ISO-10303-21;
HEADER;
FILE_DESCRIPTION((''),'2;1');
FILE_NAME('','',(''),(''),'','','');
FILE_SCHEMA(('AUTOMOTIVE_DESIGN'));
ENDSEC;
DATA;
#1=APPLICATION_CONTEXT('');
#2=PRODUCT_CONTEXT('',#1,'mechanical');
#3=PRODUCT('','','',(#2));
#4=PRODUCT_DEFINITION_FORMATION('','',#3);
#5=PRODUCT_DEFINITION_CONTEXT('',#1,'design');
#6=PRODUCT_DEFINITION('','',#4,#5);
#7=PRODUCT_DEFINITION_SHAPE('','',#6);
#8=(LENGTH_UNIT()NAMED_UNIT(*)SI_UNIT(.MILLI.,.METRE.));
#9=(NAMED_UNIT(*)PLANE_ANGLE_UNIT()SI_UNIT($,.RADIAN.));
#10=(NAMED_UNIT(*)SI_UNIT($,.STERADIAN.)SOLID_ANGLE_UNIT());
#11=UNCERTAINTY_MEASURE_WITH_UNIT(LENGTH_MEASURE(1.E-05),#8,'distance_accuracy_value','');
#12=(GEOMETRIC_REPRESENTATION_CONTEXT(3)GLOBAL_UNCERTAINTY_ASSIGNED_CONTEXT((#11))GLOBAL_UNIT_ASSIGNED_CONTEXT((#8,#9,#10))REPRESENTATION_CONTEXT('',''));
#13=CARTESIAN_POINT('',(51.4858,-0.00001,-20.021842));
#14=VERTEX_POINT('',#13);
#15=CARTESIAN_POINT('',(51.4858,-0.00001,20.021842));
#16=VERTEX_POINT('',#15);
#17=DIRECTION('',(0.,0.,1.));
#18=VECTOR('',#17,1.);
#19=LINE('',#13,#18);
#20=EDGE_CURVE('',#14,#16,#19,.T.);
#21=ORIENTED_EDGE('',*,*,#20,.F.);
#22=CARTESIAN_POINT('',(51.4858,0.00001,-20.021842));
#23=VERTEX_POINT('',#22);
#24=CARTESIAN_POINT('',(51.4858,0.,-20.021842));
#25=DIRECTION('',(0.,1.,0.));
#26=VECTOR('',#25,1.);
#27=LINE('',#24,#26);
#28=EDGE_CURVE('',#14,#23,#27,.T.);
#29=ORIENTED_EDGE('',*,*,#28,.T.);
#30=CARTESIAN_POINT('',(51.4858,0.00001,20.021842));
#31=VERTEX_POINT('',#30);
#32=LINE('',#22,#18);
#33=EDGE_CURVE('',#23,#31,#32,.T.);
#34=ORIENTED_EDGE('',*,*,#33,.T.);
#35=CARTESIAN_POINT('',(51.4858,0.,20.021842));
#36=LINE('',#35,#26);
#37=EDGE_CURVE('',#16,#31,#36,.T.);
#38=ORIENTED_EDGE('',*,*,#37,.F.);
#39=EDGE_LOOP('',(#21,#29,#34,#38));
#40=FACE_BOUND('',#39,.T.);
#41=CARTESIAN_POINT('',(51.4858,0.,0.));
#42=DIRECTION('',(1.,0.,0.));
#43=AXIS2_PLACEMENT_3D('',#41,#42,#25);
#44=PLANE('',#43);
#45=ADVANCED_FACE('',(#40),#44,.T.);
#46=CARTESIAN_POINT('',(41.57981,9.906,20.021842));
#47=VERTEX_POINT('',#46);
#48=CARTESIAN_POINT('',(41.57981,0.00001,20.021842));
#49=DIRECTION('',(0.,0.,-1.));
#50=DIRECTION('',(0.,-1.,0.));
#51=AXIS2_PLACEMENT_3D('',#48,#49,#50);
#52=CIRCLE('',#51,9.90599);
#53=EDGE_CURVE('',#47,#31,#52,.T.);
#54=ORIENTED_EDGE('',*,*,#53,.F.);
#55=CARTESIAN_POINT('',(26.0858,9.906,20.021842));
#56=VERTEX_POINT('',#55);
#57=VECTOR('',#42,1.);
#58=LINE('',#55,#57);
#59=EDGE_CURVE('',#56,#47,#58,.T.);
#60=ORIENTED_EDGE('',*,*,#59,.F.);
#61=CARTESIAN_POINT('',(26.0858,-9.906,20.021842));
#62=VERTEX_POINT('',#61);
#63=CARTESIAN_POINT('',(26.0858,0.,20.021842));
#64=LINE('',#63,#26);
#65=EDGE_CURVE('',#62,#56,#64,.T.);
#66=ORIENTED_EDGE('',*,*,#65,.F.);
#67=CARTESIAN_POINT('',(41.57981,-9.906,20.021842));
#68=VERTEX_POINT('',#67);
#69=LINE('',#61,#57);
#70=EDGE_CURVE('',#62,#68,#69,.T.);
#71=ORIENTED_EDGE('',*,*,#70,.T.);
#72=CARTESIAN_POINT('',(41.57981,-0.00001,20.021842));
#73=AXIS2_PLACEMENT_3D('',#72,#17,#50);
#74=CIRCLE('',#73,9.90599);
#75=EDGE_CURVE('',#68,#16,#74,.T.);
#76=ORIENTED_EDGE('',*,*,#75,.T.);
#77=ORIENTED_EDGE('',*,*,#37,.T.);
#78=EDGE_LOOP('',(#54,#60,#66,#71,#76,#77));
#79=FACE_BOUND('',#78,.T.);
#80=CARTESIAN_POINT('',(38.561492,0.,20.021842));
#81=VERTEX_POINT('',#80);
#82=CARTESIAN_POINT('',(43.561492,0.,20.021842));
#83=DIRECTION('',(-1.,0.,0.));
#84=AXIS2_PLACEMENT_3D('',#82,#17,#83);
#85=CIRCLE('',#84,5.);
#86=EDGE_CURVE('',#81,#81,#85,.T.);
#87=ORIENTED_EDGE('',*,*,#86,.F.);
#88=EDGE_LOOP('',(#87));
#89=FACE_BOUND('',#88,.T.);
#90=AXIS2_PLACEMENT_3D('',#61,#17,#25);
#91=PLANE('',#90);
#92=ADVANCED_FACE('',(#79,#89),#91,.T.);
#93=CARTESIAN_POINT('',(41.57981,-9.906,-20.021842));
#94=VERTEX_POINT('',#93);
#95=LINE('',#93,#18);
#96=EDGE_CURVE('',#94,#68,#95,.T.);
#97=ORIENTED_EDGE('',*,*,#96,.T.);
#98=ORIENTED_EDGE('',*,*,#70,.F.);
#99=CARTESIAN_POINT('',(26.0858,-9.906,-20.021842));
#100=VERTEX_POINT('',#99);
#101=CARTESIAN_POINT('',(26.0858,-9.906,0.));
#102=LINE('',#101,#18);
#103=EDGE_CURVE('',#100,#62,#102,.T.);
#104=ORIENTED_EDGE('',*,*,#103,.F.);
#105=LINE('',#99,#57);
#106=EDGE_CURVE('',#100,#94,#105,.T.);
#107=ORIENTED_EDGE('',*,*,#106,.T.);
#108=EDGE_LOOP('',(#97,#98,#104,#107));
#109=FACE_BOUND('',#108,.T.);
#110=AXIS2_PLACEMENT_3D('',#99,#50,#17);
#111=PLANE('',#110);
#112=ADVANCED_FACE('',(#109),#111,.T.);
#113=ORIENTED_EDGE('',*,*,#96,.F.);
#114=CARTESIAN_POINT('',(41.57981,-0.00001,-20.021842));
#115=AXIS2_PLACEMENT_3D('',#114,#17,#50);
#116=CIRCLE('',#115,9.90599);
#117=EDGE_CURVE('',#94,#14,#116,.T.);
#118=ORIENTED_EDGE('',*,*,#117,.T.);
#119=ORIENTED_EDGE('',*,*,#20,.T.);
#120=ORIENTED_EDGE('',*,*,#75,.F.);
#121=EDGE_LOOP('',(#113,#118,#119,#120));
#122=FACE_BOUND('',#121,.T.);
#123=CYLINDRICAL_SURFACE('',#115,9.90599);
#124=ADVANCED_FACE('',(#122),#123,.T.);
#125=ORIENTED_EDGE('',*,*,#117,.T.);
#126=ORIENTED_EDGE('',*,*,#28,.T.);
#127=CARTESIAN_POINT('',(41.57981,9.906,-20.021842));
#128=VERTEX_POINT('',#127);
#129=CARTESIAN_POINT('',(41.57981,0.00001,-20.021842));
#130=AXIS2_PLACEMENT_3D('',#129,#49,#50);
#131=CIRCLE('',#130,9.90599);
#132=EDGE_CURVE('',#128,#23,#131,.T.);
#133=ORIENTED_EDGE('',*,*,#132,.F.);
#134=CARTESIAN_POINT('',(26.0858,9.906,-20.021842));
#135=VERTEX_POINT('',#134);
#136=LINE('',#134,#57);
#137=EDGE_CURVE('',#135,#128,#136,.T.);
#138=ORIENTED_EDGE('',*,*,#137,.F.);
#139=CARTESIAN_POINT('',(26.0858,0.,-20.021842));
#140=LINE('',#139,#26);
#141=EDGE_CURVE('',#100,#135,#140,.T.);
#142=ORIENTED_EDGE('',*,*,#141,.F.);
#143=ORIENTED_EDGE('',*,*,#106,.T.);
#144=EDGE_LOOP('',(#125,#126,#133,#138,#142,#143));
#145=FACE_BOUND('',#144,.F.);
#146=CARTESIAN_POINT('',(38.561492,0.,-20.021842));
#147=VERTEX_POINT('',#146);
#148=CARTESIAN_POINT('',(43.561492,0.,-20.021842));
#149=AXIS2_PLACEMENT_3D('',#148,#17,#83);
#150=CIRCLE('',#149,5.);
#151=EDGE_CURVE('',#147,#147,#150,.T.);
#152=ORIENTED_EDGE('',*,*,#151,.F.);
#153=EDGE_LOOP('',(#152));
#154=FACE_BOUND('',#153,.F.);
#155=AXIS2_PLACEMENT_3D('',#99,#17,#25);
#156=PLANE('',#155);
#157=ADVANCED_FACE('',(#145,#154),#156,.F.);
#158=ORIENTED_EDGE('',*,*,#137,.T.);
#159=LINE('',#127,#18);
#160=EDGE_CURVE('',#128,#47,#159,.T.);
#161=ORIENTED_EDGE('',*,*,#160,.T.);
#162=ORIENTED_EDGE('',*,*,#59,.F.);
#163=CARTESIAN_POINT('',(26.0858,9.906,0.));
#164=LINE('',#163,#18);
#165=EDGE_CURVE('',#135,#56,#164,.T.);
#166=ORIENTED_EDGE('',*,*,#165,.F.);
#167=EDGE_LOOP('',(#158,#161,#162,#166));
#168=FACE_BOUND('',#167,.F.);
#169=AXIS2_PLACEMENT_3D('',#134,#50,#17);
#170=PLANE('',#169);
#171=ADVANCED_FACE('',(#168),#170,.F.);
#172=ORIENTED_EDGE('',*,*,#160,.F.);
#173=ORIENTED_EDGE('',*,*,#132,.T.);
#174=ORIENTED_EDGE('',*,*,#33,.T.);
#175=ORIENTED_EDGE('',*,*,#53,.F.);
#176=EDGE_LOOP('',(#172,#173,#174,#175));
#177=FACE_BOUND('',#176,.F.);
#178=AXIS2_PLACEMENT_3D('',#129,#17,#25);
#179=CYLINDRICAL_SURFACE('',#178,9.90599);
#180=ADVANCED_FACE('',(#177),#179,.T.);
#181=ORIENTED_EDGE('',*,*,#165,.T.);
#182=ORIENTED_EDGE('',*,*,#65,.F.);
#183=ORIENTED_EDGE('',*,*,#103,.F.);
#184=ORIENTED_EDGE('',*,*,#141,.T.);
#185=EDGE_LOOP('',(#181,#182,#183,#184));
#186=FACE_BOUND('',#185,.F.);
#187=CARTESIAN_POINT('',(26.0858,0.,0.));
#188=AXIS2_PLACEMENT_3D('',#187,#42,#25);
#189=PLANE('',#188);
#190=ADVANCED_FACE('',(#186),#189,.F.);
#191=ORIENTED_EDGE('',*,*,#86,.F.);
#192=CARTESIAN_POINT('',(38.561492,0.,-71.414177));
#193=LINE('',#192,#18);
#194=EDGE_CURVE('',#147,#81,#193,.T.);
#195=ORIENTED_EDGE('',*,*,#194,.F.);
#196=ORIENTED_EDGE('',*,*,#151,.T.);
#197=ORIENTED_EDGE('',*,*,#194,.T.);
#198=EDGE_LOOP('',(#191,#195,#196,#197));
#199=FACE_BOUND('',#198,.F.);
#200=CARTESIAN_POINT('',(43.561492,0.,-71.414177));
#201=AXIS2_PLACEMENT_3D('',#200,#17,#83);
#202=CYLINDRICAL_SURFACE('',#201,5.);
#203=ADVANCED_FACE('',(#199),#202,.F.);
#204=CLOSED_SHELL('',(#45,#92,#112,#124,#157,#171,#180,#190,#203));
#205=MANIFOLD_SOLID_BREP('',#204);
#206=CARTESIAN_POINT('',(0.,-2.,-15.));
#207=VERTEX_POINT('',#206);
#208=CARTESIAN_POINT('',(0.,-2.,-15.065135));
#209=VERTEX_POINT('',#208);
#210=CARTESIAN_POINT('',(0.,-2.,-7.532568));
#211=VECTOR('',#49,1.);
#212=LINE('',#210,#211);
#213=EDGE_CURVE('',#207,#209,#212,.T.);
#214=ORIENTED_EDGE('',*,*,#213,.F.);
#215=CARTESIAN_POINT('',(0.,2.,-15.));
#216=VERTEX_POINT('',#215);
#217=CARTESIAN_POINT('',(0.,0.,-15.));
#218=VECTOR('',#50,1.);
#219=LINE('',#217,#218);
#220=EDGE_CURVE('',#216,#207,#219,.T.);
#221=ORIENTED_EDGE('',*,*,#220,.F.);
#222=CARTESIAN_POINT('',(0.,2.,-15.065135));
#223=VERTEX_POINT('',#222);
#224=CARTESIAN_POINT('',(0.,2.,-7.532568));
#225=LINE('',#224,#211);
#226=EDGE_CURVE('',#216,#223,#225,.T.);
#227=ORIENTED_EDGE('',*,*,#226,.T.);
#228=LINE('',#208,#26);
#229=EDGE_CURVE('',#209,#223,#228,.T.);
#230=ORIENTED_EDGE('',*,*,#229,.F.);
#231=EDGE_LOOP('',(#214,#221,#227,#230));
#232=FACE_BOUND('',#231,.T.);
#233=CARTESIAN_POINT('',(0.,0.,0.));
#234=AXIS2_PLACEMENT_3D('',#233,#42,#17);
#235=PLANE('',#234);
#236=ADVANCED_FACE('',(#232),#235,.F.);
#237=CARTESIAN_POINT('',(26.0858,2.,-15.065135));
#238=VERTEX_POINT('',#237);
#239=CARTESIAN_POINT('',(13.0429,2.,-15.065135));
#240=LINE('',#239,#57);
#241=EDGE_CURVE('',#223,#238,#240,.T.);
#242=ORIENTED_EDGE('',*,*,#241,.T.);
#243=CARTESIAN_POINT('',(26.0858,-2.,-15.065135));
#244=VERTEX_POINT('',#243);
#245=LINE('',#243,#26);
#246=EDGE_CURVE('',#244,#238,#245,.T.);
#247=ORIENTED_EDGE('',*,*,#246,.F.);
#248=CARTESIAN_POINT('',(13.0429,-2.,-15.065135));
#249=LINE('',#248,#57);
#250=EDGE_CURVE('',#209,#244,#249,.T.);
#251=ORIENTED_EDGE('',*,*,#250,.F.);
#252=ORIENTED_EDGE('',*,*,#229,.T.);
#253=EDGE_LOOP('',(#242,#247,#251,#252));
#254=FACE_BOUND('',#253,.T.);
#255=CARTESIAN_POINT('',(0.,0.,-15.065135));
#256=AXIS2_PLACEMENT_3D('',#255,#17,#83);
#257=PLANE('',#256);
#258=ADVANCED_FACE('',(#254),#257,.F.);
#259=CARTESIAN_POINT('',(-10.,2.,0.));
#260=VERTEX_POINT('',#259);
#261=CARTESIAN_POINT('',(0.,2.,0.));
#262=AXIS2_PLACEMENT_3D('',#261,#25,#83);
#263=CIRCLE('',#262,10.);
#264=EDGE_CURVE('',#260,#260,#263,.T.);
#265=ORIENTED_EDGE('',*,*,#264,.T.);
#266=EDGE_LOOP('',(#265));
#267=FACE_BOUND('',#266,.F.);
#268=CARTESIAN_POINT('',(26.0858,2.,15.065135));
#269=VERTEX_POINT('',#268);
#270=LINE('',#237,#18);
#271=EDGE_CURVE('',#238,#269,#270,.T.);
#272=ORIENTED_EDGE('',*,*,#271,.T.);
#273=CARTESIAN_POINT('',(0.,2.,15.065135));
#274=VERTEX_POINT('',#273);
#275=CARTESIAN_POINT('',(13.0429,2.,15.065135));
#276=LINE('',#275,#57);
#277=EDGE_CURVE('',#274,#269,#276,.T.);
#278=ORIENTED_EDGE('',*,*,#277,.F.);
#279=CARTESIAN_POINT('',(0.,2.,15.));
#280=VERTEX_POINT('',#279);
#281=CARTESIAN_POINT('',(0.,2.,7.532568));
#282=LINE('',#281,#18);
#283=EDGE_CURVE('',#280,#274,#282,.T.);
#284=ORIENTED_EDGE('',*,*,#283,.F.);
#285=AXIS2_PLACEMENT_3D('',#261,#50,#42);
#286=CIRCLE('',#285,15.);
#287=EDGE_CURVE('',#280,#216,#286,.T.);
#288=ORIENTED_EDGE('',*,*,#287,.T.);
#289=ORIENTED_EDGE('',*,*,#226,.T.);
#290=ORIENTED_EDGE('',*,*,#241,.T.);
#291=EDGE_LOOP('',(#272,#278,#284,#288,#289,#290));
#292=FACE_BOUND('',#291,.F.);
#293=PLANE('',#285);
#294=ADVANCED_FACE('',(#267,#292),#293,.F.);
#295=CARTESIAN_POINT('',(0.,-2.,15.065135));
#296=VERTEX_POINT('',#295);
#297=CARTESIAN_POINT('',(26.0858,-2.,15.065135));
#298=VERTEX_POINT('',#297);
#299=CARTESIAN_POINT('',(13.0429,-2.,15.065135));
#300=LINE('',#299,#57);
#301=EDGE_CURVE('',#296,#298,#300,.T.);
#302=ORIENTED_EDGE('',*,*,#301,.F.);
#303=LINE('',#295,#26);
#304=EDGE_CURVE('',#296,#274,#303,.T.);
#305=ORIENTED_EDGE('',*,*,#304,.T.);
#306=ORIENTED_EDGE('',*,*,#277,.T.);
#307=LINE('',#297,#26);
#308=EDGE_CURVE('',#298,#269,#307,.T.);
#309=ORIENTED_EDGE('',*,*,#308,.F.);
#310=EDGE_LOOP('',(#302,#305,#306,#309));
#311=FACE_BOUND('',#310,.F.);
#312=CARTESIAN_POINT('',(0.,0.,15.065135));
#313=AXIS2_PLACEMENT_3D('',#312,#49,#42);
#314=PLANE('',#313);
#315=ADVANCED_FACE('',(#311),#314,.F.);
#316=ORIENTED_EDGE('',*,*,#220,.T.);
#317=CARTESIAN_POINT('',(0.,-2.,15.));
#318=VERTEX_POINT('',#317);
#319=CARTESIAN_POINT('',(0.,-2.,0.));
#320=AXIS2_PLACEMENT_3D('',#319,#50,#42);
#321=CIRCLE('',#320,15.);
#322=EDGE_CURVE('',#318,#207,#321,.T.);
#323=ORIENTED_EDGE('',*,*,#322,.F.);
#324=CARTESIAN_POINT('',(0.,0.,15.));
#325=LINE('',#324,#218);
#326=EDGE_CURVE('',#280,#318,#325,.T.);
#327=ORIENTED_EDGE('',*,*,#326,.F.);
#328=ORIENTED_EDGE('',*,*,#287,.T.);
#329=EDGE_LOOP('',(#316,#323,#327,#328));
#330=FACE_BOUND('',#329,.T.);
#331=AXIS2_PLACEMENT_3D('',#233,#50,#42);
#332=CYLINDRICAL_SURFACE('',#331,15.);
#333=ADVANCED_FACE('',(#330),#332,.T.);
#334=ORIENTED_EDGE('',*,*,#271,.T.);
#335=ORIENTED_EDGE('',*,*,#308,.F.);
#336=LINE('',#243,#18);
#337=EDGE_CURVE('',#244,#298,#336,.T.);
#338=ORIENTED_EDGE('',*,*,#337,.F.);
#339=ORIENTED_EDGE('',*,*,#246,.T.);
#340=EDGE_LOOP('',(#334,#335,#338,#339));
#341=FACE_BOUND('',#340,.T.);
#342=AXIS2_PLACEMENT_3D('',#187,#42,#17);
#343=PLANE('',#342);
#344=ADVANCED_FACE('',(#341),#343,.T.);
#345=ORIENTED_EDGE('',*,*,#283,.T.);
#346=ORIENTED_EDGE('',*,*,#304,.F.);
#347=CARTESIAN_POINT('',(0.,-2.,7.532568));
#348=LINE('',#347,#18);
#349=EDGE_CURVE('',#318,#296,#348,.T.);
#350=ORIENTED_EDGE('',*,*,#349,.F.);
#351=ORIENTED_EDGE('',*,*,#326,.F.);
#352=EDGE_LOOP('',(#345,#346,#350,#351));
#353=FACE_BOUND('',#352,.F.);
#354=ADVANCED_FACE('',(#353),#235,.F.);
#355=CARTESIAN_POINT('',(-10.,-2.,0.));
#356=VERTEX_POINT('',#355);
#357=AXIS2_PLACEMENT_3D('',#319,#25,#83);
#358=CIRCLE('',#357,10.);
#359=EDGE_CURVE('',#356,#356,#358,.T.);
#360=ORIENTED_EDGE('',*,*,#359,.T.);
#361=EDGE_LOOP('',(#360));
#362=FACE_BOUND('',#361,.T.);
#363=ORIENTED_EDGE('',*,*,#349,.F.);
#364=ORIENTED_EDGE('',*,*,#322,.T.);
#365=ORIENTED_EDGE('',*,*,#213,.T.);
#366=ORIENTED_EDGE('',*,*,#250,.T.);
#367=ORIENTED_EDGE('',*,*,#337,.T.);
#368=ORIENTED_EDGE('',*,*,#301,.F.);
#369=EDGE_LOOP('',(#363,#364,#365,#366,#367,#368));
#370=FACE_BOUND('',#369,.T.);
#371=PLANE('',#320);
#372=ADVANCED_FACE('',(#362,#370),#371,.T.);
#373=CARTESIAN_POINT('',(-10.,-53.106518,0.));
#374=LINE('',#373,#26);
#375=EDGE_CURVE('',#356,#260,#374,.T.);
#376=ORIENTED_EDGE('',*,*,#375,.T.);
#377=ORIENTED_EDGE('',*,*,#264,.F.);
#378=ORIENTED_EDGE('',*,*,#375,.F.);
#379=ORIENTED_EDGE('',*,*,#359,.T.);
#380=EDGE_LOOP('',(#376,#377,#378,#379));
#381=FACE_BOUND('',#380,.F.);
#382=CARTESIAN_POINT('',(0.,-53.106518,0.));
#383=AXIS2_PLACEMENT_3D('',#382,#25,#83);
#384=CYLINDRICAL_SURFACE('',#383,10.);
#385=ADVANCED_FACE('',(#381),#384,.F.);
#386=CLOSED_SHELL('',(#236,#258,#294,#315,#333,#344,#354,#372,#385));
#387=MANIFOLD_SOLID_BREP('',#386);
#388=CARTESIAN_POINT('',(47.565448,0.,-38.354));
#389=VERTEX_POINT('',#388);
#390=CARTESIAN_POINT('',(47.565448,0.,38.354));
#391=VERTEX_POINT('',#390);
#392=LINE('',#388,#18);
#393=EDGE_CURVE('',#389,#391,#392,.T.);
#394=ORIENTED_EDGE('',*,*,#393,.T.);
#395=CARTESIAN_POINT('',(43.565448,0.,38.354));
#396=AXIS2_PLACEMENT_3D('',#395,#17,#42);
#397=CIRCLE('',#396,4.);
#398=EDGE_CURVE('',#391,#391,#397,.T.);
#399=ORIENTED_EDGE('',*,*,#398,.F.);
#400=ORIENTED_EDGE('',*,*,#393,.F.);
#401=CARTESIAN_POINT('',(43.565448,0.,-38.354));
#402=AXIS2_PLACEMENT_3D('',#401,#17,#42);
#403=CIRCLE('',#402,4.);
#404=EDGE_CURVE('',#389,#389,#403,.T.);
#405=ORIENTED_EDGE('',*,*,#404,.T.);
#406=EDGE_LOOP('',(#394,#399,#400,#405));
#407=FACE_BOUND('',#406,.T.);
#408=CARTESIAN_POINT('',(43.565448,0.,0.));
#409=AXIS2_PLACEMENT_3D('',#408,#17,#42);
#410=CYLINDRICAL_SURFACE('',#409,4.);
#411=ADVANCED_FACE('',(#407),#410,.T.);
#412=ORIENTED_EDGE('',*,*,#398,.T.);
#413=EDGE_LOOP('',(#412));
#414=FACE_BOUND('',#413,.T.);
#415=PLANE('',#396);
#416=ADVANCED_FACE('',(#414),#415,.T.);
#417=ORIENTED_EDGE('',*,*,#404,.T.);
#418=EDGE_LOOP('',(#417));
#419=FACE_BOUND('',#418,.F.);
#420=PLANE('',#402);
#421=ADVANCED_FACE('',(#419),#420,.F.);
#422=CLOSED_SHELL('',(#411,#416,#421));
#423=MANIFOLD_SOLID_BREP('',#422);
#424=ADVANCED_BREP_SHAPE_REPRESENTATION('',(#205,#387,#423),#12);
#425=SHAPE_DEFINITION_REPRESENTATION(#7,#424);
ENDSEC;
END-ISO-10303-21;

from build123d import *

# Parameters (mm, degrees)
F0_R      = 15
F1_DEPTH  = 2
F3_W      = 26.0858
F3_H      = 15.0651354343
F4_DEPTH  = 2
F6_D      = 20
F7_W      = 19.812
F7_H      = 40.0436846481
F7_W_2    = 4
F7_H_2    = 30.1302708685
F8_DEPTH  = 25.4
F9_R      = 9.90599
F11_D     = 10
F12_R     = 4
F13_DEPTH = 38.354


# Not quite as in the source:
# - a fillet or chamfer is up to 0.001 mm smaller than in the source, because OpenCascade refuses the exact size


with BuildPart() as f1:
    # F0 (on Front) → F1 (new body, symmetric)
    with BuildSketch(Plane.XZ):
        Circle(F0_R)
    extrude(amount=F1_DEPTH, both=True)

    # F3 (on Front) → F4 (join, symmetric)
    with BuildSketch(Plane.XZ):
        with Locations((13.0429, 7.5325677171)):
            Rectangle(F3_W, F3_H)
    extrude(amount=F4_DEPTH, both=True)

    # F5: F1 across plane


with BuildPart() as f1_1:
    add(f1.part)
    add(f1.part.mirror(Plane.XY))

    # F6 (through all)
    with Locations(Plane.XZ.offset(2)):
        with Locations((0, 0)):
            Hole(F6_D / 2)


with BuildPart() as f8:
    # F7 (on face) → F8 (new body)
    with BuildSketch(Plane.YZ.offset(26.0858)):
        Rectangle(F7_W, F7_H)
        Rectangle(F7_W_2, F7_H_2, mode=Mode.SUBTRACT)
        Rectangle(F7_W_2, F7_H_2)
    extrude(amount=F8_DEPTH)

    # F9 (radius 9.906 in the source; OpenCascade refuses exactly that, so slightly less here)
    f9_edges = [f8.edges().sort_by_distance(p)[0] for p in [
        (51.4858, -9.906, 0),
        (51.4858, 9.906, 0),
    ]]
    fillet(f9_edges, radius=F9_R)

    # F11 (through all)
    with Locations(Plane(origin=(0, 0, -20.021842324), x_dir=(1, 0, 0), z_dir=(0, 0, -1))):
        with Locations((43.5614921153, 0)):
            Hole(F11_D / 2)


with BuildPart() as f13:
    # F12 (on Top) → F13 (new body, symmetric)
    with BuildSketch(Plane.XY):
        with Locations((43.5654483736, 0)):
            Circle(F12_R)
    extrude(amount=F13_DEPTH, both=True)


solid = Compound([f1_1.part, f8.part, f13.part])
